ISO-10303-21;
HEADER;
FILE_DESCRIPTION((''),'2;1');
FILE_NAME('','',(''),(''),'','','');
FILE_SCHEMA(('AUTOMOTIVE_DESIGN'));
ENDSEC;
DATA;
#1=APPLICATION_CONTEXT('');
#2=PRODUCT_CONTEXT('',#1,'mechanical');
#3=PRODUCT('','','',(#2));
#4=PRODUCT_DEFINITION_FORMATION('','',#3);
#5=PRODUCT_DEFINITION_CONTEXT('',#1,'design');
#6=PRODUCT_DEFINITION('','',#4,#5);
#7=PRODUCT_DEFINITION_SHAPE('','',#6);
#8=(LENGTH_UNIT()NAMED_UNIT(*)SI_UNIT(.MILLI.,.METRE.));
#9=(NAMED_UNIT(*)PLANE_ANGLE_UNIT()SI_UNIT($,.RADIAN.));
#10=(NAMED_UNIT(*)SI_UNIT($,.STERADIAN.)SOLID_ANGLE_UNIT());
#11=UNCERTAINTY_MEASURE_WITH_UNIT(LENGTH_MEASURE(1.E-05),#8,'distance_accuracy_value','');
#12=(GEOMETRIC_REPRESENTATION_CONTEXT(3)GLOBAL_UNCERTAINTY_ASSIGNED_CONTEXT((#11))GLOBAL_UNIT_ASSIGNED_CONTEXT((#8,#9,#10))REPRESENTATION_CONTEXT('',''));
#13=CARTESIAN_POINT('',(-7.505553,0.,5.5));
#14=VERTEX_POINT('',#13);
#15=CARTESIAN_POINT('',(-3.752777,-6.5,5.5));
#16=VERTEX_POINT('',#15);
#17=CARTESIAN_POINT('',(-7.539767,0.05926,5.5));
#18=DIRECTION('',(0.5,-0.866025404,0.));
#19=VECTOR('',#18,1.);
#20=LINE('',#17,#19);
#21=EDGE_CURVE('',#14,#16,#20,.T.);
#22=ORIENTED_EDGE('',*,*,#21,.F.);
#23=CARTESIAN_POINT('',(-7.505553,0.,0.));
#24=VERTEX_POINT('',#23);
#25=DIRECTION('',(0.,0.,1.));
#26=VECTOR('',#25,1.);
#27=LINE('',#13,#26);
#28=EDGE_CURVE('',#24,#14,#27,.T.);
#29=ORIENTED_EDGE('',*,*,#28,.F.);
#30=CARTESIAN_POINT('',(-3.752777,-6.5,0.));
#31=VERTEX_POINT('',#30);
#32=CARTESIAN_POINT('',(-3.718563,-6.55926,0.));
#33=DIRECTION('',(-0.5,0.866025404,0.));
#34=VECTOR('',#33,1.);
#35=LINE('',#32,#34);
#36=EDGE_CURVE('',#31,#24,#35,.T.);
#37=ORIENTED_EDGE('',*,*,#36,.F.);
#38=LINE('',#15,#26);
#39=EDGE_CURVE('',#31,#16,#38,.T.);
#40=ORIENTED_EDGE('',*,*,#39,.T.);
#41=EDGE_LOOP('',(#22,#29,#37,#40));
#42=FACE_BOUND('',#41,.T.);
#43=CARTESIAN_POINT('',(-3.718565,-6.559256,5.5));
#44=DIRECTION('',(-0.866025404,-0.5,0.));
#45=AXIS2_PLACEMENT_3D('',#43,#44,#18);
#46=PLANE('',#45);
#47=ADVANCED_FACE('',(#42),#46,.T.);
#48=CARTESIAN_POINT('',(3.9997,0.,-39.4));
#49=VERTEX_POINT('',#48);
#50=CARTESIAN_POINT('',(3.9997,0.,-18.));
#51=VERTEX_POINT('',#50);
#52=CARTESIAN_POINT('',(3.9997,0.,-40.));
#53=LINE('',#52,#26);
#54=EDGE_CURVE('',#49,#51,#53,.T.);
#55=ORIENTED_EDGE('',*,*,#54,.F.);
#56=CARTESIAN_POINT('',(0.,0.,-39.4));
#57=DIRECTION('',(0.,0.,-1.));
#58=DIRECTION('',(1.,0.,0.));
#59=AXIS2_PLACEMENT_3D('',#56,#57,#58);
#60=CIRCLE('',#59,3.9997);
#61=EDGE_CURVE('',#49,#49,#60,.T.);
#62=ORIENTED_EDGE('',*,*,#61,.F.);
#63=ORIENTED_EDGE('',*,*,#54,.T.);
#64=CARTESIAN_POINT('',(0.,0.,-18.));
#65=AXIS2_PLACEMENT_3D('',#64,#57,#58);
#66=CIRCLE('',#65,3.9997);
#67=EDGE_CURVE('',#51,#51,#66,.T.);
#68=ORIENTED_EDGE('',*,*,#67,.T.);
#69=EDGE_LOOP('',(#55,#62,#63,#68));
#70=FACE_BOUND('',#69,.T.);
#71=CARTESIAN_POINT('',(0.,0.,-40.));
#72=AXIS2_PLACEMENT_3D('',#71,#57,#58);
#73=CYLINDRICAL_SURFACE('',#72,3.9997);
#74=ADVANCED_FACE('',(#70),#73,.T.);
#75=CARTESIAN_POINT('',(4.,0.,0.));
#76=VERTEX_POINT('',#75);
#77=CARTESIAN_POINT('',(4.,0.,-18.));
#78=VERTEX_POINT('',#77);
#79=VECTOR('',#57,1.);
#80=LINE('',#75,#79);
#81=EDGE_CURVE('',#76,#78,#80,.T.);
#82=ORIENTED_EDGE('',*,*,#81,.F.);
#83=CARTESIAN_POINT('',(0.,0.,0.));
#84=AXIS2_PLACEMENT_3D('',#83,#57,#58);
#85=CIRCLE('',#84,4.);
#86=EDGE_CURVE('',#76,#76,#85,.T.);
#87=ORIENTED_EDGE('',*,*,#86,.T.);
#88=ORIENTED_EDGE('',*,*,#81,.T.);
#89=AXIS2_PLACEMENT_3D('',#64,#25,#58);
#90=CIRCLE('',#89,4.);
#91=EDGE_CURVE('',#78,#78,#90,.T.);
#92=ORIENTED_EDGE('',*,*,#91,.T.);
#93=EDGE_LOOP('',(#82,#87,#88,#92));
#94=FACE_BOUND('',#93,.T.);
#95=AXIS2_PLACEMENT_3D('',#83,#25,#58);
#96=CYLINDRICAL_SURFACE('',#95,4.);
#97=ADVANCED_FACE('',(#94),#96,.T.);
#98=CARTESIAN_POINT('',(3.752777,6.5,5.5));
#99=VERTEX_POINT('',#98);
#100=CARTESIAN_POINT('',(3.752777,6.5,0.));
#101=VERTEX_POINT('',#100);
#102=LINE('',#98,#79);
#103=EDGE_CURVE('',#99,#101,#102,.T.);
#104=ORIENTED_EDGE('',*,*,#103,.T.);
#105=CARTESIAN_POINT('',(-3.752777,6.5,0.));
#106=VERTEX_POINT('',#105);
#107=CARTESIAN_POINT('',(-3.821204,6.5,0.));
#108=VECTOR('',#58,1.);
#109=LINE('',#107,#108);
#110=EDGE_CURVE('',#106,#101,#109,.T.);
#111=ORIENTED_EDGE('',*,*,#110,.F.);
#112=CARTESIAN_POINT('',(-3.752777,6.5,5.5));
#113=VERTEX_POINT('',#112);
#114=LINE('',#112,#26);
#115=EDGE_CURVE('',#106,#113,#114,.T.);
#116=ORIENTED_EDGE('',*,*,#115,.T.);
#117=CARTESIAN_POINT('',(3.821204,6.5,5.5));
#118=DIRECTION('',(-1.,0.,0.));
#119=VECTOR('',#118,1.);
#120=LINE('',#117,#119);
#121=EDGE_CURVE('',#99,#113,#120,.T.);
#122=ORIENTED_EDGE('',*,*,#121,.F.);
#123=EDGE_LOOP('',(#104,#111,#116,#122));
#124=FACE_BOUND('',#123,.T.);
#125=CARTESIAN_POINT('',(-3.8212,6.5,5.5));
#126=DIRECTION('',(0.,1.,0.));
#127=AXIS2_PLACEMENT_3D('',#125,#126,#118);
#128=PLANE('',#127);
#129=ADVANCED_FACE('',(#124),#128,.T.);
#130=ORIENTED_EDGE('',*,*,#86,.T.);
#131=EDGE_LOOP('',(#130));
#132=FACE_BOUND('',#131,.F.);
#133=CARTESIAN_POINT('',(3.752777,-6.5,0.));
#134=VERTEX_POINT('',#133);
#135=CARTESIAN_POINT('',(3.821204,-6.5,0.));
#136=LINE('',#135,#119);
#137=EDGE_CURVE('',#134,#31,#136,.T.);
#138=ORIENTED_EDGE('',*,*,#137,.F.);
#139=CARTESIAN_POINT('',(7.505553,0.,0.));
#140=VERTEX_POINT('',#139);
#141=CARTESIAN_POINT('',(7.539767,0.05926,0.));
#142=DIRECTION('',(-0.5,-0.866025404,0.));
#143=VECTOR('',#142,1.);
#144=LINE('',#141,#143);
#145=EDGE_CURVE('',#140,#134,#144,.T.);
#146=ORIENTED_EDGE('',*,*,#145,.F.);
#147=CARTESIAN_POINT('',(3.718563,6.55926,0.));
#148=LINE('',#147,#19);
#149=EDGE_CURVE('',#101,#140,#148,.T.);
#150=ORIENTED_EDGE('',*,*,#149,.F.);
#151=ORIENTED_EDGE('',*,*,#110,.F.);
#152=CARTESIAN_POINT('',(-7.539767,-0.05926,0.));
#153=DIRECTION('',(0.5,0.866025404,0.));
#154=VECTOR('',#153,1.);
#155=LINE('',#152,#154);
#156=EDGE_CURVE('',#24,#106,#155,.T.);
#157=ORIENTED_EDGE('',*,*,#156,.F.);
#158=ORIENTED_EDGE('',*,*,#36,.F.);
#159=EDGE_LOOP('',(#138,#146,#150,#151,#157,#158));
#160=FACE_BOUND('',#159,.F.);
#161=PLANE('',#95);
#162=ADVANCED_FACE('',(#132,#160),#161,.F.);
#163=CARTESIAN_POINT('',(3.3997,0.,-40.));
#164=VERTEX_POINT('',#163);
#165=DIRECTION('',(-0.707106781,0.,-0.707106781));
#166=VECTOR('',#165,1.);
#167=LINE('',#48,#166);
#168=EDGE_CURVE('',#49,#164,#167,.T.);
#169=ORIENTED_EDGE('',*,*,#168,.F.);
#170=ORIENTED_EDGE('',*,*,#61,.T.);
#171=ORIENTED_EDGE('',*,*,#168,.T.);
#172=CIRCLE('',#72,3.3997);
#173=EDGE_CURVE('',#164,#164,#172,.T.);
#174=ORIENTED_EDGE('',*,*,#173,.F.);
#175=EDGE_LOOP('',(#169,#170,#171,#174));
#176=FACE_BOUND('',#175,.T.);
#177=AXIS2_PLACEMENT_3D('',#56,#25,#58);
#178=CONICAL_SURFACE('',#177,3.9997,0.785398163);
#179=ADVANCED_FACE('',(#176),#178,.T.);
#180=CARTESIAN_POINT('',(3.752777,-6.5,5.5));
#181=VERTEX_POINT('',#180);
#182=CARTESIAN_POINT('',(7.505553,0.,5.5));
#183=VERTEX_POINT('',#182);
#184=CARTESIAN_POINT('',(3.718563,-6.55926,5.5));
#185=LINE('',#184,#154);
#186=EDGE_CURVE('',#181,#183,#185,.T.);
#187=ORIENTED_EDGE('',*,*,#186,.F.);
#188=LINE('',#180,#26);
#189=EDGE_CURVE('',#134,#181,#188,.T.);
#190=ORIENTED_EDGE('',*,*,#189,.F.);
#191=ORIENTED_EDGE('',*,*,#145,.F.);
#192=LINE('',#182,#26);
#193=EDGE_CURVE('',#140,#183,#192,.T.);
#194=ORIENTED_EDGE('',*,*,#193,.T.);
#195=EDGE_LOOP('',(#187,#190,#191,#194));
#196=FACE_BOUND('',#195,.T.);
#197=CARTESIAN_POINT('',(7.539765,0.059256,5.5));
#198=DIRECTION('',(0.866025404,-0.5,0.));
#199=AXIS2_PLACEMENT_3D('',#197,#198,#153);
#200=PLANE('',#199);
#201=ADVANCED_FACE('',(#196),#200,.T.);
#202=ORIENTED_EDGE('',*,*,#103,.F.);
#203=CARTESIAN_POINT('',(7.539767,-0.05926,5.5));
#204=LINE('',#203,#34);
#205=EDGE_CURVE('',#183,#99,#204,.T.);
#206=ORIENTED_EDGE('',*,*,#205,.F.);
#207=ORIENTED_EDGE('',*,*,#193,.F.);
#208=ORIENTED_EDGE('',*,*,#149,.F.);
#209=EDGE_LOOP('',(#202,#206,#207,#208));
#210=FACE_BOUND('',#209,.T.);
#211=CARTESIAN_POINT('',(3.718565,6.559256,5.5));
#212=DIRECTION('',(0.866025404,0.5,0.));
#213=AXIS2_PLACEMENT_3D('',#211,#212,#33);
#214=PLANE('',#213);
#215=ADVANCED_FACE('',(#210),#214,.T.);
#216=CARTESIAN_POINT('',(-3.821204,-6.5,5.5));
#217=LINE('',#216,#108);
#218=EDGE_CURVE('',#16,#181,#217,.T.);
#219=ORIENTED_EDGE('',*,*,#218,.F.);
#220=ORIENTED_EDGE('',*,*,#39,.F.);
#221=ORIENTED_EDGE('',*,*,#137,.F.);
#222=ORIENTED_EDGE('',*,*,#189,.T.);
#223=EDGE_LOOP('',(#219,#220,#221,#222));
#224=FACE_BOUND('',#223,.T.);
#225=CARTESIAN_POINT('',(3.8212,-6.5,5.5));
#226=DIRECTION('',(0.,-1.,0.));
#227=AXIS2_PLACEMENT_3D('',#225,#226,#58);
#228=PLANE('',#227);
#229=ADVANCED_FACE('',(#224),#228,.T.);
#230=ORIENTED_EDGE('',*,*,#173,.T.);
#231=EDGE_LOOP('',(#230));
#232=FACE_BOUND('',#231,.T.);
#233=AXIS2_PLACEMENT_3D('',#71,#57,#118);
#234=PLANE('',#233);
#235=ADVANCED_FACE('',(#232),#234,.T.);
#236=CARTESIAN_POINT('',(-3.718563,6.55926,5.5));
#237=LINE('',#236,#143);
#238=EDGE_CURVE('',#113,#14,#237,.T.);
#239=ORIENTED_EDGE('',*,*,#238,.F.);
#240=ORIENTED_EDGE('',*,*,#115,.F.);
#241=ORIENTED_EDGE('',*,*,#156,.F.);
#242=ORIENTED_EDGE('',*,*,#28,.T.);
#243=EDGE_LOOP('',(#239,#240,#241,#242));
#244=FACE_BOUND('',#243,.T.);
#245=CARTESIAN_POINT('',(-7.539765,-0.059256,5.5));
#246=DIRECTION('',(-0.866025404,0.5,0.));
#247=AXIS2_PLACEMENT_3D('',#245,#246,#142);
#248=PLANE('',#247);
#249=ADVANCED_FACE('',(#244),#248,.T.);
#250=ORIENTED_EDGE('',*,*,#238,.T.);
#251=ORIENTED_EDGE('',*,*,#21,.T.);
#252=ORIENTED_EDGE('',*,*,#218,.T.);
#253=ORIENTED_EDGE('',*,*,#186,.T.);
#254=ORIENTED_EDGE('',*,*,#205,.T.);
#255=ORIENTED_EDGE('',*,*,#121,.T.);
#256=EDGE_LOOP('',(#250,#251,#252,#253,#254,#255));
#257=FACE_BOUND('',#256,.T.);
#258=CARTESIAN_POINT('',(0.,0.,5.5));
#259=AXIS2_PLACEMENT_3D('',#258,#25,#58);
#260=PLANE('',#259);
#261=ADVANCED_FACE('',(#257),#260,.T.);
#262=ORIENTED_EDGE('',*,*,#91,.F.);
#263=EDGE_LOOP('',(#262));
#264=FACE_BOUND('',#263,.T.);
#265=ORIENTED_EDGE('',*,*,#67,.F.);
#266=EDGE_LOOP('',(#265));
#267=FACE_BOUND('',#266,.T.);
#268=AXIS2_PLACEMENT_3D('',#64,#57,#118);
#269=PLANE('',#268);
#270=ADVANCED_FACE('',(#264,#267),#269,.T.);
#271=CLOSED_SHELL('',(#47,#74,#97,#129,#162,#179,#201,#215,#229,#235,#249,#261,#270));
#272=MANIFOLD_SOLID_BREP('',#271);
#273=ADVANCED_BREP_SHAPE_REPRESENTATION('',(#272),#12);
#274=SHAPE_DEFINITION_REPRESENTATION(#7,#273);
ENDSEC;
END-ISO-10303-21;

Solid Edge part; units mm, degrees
sketch "Sketch1" plane through (0, 0, 0) normal (0, 0, 1) x (1, 0, 0)
  circle A0 centre (0, 0) radius 7.54
  dimension "D1" = 15.08
extrude "Protrusion1" add sketch "Sketch1" along normal blind 5.5
sketch "Sketch2" plane through (0, 0, 0) normal (0, 0, -1) x (1, 0, 0)
  circle A0 centre (0, 0) radius 4
extrude "Protrusion2" add sketch "Sketch2" along normal blind 40
sketch "Sketch3" plane through (0, 0, -40) normal (0, 0, -1) x (1, 0, 0)
  circle A0 centre (0, 0) radius 3.9997
extrude "Cutout1" cut sketch "Sketch3" against normal blind 22 flip side to cut
chamfer "Chamfer_1" distance 0.6 angle 45 1 edges at (-3.9997, 0, -40)
sketch "Sketch4" plane through (0, 0, 5.5) normal (0, 0, 1) x (1, 0, 0)
  line L0 (-3.8212, 6.5) -> (3.8212, 6.5)
  dimension "D1" = 13
extrude "Cutout2" cut sketch "Sketch4" against normal up to next material side at (0, 6.55, 5.5)
pattern_circular "Pattern1" count 6 over 360 about axis through (0, 0, 5.5) along (0, 0, 1) of "Cutout2"
properties part number "24101202"
